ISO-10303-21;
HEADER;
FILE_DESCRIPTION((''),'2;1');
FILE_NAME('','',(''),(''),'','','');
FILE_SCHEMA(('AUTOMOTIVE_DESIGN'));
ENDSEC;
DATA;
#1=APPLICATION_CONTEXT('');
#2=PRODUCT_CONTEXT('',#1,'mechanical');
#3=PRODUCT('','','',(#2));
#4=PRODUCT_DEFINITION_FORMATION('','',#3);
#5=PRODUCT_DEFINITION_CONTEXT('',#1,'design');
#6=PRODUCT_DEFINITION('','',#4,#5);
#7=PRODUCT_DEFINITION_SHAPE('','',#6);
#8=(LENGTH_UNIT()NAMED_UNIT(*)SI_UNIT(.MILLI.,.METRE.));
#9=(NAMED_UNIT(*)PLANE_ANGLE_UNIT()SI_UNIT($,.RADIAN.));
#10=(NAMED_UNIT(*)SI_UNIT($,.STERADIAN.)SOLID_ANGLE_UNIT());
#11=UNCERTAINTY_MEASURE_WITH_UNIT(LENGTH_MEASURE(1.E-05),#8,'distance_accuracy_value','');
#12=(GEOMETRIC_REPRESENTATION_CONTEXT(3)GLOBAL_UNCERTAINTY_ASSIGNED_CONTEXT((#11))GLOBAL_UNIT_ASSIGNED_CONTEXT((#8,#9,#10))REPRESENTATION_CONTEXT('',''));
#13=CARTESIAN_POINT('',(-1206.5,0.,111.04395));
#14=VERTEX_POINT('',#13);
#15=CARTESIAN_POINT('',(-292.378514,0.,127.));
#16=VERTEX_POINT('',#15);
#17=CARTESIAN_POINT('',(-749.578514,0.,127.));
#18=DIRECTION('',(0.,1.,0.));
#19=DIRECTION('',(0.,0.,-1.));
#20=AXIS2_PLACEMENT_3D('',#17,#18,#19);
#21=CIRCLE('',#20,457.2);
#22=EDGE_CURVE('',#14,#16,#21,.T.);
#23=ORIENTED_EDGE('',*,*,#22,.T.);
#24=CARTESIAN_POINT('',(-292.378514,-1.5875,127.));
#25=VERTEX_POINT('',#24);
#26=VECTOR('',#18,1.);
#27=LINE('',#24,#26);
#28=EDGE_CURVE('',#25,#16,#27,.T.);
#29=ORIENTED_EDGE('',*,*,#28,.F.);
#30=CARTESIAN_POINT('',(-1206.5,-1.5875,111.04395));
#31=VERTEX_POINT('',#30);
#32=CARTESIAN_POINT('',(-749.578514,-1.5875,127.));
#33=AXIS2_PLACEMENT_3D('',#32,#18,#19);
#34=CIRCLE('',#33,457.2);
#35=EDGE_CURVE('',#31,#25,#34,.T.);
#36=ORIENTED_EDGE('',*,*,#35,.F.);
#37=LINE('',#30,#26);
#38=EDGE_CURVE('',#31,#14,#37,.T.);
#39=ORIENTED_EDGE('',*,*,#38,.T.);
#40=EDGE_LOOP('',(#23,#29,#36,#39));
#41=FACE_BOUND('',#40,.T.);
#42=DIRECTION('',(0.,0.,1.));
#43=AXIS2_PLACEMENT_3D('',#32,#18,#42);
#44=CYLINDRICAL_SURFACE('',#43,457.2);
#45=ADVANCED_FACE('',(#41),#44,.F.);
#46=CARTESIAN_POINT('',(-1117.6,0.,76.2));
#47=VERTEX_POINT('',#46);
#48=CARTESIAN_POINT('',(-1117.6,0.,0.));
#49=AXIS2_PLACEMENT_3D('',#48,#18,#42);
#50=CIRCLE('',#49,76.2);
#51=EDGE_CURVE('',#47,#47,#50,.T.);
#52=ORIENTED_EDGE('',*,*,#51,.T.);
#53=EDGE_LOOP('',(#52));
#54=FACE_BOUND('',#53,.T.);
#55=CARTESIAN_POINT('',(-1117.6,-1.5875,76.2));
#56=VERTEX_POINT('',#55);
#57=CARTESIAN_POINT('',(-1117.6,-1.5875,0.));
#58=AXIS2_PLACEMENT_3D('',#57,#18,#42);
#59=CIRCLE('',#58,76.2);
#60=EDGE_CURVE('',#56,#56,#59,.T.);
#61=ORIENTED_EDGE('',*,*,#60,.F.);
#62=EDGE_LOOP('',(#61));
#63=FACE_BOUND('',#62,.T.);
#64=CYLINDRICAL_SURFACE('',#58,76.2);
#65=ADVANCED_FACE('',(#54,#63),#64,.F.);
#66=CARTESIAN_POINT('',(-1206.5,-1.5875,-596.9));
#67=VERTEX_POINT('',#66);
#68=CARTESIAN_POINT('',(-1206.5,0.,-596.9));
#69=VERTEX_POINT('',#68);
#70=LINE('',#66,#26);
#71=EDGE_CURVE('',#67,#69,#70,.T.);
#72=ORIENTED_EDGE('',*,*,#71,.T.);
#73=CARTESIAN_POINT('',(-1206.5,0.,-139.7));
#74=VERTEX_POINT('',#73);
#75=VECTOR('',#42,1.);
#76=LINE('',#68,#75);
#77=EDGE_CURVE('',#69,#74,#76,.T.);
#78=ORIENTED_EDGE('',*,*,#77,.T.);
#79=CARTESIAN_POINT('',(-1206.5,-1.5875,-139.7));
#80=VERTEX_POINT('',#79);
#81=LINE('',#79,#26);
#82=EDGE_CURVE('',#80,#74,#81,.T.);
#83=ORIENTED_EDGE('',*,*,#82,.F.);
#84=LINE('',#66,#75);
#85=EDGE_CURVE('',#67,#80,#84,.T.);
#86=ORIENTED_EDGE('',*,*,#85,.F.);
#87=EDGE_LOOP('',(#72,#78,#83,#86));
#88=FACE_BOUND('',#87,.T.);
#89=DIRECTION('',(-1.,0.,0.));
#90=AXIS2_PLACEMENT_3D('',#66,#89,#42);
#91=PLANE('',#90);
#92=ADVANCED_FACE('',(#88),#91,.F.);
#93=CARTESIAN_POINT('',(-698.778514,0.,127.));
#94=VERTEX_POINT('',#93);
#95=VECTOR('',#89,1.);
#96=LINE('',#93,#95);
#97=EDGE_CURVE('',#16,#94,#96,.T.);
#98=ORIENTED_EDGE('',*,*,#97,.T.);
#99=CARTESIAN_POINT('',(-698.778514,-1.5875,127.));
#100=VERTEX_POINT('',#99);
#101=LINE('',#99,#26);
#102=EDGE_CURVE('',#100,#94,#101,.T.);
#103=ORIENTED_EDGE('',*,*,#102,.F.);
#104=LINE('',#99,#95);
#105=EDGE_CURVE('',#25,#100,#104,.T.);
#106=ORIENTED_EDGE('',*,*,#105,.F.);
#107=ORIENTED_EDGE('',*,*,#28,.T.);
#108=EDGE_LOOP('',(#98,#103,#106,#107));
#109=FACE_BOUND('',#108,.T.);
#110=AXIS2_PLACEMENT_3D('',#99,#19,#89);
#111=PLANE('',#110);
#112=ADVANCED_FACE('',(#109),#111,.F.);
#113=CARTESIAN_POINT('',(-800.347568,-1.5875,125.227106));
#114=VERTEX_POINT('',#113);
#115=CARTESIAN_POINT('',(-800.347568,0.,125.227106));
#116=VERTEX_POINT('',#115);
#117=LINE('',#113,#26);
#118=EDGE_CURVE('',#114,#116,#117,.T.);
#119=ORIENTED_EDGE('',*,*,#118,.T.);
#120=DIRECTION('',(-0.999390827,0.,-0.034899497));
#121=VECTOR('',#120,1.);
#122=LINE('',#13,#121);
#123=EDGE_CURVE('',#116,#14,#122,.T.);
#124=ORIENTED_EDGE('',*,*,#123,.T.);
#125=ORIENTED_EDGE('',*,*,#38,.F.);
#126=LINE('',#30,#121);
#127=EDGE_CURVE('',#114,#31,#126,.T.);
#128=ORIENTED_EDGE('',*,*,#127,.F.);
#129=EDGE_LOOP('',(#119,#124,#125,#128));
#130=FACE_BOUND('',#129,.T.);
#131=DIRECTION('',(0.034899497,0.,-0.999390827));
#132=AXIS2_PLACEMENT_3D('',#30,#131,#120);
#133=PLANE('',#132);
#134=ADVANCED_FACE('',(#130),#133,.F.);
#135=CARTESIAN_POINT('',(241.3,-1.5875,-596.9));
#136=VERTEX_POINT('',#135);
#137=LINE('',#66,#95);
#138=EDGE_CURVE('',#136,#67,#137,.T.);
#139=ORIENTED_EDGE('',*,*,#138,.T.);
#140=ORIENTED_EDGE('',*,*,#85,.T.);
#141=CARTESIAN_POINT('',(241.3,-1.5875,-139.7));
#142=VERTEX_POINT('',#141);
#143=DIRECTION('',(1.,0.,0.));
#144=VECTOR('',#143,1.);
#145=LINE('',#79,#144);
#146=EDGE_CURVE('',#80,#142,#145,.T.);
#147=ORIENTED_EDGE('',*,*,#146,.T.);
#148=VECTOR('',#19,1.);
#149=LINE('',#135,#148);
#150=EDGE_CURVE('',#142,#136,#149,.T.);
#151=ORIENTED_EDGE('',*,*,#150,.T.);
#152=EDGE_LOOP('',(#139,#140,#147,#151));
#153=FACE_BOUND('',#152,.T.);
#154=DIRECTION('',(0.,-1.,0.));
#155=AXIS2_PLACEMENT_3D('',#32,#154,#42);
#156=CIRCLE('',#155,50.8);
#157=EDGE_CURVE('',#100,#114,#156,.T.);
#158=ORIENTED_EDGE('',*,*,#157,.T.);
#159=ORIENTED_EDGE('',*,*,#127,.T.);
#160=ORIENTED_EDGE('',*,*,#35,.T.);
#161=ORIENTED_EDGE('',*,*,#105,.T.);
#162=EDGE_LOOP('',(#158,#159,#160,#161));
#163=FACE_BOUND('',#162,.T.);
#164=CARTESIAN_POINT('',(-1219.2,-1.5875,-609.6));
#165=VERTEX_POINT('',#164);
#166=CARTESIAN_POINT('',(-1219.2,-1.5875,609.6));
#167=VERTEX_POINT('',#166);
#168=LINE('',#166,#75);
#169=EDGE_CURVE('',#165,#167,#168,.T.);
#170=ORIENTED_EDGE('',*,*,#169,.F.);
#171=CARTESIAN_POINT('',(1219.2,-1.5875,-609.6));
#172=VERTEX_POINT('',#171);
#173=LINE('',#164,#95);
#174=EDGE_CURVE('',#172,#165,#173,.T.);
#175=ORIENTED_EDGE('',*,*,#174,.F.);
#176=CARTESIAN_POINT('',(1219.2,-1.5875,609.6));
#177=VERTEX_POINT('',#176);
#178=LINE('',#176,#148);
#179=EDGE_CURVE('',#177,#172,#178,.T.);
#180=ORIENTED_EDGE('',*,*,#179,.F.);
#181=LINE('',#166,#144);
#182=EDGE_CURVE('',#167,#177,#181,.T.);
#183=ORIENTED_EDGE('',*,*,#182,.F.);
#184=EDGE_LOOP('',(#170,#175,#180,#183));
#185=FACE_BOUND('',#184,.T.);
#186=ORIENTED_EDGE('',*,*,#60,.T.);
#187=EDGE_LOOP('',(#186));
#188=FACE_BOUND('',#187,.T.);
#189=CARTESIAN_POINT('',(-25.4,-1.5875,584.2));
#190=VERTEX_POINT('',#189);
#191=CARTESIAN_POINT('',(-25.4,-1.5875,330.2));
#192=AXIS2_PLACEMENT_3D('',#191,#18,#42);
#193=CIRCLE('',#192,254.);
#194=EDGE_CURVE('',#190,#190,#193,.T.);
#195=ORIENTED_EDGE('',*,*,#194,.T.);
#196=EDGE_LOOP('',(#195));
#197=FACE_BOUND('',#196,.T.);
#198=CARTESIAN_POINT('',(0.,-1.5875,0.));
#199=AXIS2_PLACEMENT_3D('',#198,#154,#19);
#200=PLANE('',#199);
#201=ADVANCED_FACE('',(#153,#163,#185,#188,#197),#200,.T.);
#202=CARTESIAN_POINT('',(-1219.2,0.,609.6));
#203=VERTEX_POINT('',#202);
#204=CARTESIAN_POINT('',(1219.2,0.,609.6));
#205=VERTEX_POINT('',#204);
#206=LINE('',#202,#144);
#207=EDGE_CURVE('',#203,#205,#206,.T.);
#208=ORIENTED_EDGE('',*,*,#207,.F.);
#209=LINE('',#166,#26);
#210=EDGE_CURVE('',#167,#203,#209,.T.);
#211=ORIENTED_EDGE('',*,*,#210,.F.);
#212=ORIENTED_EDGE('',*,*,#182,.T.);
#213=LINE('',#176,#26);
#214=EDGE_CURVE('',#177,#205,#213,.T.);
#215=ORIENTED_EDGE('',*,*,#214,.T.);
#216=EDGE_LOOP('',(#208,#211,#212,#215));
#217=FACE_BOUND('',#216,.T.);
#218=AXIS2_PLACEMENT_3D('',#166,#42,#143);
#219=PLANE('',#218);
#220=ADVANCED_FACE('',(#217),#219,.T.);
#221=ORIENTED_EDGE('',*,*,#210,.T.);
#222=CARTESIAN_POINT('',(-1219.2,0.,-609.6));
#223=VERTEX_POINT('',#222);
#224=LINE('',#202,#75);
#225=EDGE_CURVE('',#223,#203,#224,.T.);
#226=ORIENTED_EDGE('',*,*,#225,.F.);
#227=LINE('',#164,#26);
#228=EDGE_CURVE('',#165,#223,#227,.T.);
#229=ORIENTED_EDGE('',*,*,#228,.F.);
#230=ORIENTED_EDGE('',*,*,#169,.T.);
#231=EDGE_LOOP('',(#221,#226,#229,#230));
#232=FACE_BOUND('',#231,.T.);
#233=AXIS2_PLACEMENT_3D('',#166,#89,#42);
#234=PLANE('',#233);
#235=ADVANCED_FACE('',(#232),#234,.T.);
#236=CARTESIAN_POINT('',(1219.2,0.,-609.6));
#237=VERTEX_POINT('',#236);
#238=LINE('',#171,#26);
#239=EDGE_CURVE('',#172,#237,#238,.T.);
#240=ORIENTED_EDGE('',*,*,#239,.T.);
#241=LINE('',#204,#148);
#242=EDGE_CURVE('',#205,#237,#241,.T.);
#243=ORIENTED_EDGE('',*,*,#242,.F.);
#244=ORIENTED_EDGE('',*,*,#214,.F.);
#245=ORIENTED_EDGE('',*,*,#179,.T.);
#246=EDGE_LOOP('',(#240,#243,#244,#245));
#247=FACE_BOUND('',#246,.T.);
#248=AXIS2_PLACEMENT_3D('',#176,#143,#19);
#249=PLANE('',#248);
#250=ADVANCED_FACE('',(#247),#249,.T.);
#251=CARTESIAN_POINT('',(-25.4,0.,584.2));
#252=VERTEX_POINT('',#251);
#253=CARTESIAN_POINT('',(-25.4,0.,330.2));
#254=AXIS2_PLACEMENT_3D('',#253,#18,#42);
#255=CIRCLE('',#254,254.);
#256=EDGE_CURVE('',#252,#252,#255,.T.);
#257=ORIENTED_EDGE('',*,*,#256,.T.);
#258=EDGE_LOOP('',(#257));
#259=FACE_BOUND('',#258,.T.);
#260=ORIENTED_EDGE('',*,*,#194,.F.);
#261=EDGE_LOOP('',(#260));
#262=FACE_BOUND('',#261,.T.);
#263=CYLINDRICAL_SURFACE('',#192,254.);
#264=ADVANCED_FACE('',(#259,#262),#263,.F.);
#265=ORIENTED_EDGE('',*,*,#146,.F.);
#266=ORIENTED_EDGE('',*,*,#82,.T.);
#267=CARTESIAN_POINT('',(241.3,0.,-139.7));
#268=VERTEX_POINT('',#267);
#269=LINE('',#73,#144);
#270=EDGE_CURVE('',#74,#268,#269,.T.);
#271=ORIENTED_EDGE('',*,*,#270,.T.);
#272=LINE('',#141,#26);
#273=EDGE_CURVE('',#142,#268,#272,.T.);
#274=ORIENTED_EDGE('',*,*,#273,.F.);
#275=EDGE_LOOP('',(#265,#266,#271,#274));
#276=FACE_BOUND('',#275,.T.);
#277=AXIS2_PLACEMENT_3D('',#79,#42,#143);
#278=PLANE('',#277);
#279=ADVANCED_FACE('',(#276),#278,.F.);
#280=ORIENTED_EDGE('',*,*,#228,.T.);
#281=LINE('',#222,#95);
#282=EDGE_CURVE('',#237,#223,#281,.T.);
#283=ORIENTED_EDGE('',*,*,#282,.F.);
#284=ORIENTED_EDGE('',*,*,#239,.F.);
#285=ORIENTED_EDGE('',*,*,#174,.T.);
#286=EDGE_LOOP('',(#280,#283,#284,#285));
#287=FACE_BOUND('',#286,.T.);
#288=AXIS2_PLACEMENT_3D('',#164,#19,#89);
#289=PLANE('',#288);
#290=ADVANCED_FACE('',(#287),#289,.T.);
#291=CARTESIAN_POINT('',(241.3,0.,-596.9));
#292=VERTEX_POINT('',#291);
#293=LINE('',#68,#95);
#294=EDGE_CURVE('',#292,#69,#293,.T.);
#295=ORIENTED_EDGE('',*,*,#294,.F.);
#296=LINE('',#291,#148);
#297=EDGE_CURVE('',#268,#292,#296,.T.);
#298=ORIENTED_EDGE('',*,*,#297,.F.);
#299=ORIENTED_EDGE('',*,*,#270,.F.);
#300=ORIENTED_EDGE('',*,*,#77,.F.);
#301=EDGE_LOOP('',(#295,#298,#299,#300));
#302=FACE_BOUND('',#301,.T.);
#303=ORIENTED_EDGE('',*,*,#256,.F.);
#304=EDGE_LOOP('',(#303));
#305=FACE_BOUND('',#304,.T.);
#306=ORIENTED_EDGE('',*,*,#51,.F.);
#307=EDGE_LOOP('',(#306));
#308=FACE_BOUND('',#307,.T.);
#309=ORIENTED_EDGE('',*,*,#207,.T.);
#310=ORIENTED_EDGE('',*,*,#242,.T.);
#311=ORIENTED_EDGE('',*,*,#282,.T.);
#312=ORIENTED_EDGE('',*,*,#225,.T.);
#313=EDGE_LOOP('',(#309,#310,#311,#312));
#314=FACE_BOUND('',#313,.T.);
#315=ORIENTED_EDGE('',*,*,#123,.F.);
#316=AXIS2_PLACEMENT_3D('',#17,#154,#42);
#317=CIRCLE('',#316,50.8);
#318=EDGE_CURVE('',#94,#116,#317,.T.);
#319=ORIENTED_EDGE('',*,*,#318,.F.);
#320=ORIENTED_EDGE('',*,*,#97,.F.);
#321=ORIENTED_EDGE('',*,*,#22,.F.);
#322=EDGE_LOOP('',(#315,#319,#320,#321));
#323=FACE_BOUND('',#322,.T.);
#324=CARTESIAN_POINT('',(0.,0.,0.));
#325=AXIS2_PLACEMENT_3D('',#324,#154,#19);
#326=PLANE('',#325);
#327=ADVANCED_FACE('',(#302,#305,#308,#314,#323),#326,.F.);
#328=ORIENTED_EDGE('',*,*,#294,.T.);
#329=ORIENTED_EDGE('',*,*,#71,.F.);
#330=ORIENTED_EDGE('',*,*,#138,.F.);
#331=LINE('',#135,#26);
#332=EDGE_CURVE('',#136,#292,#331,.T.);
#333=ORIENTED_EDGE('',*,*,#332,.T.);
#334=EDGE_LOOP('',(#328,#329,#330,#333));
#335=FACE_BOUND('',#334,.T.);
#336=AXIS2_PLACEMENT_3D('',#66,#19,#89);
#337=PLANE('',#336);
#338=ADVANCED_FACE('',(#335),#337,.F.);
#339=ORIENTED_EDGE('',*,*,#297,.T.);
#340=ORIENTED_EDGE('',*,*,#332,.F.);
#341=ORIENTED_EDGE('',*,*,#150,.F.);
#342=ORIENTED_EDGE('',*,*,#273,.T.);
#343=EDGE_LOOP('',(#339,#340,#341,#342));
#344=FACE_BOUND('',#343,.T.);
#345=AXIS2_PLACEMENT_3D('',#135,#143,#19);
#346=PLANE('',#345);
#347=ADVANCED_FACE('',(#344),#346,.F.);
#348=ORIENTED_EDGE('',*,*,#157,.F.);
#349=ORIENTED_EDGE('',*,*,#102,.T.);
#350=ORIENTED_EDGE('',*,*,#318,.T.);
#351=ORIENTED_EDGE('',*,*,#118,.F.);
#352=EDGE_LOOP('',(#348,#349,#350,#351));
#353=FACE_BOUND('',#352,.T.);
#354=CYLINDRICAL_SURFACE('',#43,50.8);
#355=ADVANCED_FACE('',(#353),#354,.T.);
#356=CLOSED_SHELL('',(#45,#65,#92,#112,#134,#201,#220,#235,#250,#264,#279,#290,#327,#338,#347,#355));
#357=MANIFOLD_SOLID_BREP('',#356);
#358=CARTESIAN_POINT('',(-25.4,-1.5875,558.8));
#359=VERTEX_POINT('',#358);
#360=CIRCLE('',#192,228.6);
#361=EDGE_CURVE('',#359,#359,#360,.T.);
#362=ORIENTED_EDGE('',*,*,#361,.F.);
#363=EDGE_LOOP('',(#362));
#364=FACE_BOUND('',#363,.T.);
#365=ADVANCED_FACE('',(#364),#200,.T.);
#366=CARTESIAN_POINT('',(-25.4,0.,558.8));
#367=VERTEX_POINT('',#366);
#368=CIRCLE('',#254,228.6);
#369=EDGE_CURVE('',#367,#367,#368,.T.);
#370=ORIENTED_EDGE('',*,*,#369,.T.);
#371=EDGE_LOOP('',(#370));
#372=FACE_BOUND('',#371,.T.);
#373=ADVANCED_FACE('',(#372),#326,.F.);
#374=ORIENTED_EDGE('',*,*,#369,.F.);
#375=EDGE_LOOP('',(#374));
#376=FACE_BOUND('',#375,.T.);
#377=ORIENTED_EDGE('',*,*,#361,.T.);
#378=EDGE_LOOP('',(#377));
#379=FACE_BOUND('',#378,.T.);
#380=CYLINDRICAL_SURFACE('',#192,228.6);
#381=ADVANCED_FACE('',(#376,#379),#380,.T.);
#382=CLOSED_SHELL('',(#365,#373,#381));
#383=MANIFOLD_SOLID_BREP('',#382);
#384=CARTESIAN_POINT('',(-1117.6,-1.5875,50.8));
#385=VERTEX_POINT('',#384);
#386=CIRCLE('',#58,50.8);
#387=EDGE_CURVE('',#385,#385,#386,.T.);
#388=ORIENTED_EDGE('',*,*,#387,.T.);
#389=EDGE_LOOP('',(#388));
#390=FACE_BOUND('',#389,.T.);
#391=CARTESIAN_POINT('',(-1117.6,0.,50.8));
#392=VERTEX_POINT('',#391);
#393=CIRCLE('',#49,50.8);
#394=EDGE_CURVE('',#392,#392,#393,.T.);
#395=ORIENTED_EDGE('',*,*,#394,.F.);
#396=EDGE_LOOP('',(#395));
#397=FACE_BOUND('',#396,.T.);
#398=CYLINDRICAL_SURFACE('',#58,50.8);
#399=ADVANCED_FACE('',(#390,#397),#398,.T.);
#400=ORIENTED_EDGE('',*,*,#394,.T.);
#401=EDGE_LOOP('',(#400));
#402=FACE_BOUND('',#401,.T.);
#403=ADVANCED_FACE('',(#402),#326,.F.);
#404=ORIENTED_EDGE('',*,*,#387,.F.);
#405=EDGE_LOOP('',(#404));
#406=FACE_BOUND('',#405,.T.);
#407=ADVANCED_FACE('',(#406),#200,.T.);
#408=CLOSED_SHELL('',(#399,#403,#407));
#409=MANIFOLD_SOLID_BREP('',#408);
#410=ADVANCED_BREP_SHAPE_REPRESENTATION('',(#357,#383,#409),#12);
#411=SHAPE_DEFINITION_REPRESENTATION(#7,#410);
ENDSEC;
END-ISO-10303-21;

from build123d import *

# Parameters (mm, degrees)
SKETCH1_W          = 2438.4
SKETCH1_H          = 1219.2
BASE_FLANGE1_DEPTH = 1.5875
SKETCH6_R          = 254
SKETCH6_R_2        = 228.6
SKETCH6_R_3        = 76.2
SKETCH6_R_4        = 50.8
SKETCH6_W          = 1447.8
SKETCH6_H          = 457.2
CUT_EXTRUDE3_DEPTH = 1364.1079635


# Sheet-metal steps are written as plain solids
with BuildPart() as part:
    # Sketch1 → Base-Flange1 (new body)
    with BuildSketch(Plane(origin=(0, 0, 0), x_dir=(1, 0, 0), z_dir=(0, 1, 0))):
        Rectangle(SKETCH1_W, SKETCH1_H)
    extrude(amount=-BASE_FLANGE1_DEPTH)

    # Sketch6 → Cut-Extrude3 (cut, through all)
    # profile 1 of 4: a face of its own
    with BuildSketch(Plane(origin=(0, 0, 0), x_dir=(1, 0, 0), z_dir=(0, 1, 0))):
        with Locations(Location((-25.4, -330.2, 0), (0, 0, 270))):
            Circle(SKETCH6_R)
        with Locations(Location((-25.4, -330.2, 0), (0, 0, 270))):
            Circle(SKETCH6_R_2, mode=Mode.SUBTRACT)
    # profile 2 of 4: a face of its own
    with BuildSketch(Plane(origin=(0, 0, 0), x_dir=(1, 0, 0), z_dir=(0, 1, 0))):
        with Locations(Location((-1117.6, 0, 0), (0, 0, 270))):
            Circle(SKETCH6_R_3)
        with Locations(Location((-1117.6, 0, 0), (0, 0, 270))):
            Circle(SKETCH6_R_4, mode=Mode.SUBTRACT)
    # profile 3 of 4: a face of its own
    with BuildSketch(Plane(origin=(0, 0, 0), x_dir=(1, 0, 0), z_dir=(0, 1, 0))):
        with Locations((-482.6, 368.3)):
            Rectangle(SKETCH6_W, SKETCH6_H)
    # profile 4 of 4: a face of its own
    with BuildSketch(Plane(origin=(0, 0, 0), x_dir=(1, 0, 0), z_dir=(0, 1, 0))):
        with BuildLine():
            Line((-698.778513887, -127), (-292.378513887, -127))
            ThreePointArc((-292.378513887, -127), (-757.55775411, -584.130366226), (-1206.5, -111.043950108))
            Line((-1206.5, -111.043950108), (-800.347567899, -125.227105568))
            ThreePointArc((-800.347567899, -125.227105568), (-750.465096134, -177.792262914), (-698.778513887, -127))
        make_face()
    extrude(amount=-CUT_EXTRUDE3_DEPTH, mode=Mode.SUBTRACT)


with BuildPart() as cut_extrude3_piece_1:
    # of the separate pieces the step leaves, piece 1, a body of its own (cut_extrude3_pieces)
    add(part.part.solids().sort_by_distance((-1219.2, 0, 609.6))[0])


with BuildPart() as cut_extrude3_piece_2:
    # of the separate pieces the step leaves, piece 2, a body of its own (cut_extrude3_pieces)
    add(part.part.solids().sort_by_distance((-25.4, 0, 558.8))[0])


with BuildPart() as cut_extrude3_piece_3:
    # of the separate pieces the step leaves, piece 3, a body of its own (cut_extrude3_pieces)
    add(part.part.solids().sort_by_distance((-1117.6, 0, 50.8))[0])


solid = Compound([cut_extrude3_piece_1.part, cut_extrude3_piece_2.part, cut_extrude3_piece_3.part])
